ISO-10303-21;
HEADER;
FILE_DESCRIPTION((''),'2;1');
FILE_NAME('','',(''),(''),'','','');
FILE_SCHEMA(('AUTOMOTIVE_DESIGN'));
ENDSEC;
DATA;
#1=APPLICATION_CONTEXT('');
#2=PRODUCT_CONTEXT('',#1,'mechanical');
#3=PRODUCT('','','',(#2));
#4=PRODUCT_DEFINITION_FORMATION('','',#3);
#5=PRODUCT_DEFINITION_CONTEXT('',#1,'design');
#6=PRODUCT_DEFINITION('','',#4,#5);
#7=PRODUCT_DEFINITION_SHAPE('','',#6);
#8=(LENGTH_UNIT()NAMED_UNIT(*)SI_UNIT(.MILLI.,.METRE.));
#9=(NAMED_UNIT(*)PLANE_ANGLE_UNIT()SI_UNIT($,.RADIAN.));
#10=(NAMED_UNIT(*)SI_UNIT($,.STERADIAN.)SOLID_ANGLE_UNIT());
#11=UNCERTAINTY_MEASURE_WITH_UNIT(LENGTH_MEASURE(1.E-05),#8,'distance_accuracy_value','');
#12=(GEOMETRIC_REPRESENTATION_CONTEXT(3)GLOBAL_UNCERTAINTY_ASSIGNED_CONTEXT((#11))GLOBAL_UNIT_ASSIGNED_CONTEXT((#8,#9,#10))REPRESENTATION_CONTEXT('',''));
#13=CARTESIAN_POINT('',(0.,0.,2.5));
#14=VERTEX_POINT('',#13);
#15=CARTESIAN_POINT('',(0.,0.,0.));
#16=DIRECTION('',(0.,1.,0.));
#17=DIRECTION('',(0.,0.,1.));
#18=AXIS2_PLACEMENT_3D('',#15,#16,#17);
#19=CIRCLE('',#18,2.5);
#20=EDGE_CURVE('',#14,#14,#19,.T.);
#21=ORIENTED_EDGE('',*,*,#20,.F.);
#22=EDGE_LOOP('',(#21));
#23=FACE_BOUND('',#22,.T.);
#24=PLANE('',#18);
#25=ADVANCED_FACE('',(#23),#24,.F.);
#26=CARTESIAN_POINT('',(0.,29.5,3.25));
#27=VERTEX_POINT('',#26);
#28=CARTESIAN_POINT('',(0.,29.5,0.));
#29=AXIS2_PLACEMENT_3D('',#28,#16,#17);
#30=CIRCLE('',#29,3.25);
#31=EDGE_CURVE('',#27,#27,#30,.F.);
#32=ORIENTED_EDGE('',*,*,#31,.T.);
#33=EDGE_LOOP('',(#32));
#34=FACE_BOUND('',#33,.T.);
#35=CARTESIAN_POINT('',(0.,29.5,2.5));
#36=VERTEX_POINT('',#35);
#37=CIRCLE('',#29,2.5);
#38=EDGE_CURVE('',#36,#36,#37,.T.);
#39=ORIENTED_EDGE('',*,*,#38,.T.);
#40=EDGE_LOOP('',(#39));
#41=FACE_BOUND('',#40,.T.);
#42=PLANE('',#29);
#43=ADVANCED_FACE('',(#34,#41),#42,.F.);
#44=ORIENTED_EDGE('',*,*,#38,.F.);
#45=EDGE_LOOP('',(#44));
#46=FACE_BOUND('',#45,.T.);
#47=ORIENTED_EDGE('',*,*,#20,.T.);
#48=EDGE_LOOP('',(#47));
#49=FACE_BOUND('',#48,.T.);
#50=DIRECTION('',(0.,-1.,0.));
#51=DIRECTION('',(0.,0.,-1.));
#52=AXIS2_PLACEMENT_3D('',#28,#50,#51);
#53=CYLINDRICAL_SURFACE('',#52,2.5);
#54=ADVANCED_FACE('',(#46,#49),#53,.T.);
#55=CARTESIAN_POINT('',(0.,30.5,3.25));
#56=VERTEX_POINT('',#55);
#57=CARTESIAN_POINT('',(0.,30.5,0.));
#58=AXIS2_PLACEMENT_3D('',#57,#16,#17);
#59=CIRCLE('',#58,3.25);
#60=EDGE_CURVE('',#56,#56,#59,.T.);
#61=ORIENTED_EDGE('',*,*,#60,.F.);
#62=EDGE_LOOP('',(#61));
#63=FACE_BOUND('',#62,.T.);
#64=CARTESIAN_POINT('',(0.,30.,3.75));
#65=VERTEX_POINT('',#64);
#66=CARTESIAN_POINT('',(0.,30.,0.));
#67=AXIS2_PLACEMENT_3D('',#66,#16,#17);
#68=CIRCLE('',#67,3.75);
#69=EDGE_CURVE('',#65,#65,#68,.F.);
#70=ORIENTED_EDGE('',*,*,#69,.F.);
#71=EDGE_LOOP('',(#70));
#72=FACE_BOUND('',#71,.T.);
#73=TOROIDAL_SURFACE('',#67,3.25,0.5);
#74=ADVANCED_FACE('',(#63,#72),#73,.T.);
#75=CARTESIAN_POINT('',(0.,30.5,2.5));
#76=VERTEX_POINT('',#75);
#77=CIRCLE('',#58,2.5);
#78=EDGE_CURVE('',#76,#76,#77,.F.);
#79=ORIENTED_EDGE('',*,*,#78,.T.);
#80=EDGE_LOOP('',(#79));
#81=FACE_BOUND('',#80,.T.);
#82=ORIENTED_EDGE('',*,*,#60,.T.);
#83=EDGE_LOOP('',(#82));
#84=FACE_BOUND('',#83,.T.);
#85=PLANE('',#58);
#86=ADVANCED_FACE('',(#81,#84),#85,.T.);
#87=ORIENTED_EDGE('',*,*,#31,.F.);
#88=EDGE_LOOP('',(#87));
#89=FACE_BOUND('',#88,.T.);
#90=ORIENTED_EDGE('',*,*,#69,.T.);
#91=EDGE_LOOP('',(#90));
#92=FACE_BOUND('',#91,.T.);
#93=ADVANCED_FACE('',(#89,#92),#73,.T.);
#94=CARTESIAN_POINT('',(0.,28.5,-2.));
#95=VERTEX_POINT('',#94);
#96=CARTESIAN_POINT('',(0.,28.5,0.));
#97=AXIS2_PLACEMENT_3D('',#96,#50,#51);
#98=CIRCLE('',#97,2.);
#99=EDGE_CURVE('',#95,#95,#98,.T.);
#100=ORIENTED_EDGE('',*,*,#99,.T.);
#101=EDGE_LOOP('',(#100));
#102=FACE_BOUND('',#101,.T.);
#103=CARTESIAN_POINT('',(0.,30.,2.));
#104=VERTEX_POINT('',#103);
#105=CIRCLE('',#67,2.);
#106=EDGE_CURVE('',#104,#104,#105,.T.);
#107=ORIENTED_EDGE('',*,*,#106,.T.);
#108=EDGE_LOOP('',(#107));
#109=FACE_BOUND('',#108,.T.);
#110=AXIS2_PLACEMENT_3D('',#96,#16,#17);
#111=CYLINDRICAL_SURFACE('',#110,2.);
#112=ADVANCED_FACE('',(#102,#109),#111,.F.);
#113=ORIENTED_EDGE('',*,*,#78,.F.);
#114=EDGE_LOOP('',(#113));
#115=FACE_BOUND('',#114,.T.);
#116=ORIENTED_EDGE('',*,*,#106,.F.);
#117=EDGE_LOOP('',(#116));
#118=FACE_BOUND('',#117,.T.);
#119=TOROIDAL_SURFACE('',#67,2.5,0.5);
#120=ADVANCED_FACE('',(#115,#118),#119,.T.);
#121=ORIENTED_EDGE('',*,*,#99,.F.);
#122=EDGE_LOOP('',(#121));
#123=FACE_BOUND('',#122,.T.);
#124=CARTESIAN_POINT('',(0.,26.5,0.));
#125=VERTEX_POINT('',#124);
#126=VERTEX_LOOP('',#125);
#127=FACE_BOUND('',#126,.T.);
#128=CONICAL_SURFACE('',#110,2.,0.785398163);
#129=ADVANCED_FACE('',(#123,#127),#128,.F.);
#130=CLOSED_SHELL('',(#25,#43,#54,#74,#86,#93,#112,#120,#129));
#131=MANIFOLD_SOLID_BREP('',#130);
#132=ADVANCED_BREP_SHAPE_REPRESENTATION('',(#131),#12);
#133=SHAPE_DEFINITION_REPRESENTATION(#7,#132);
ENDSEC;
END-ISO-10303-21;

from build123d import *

# Parameters (mm, degrees)
SKETCH1_R           = 2.5
BOSS_EXTRUDE1_DEPTH = 29.5
SKETCH2_R           = 3.75
BOSS_EXTRUDE2_DEPTH = 1
SKETCH3_R           = 2
CUT_EXTRUDE2_DEPTH  = 2
FILLET1_R           = 0.5


with BuildPart() as part:
    # Sketch1 → Boss-Extrude1 (new body)
    with BuildSketch(Plane(origin=(0, 0, 0), x_dir=(1, 0, 0), z_dir=(0, 1, 0))):
        with Locations(Location((0, 0, 0), (0, 0, 270))):
            Circle(SKETCH1_R)
    extrude(amount=BOSS_EXTRUDE1_DEPTH)

    # Sketch2 → Boss-Extrude2 (add)
    with BuildSketch(Plane(origin=(0, 29.5, 0), x_dir=(1, 0, 0), z_dir=(0, 1, 0))):
        with Locations(Location((0, 0, 0), (0, 0, 270))):
            Circle(SKETCH2_R)
    extrude(amount=BOSS_EXTRUDE2_DEPTH)

    # Sketch3 → Cut-Extrude2 (cut)
    with BuildSketch(Plane(origin=(0, 30.5, 0), x_dir=(1, 0, 0), z_dir=(0, 1, 0))):
        with Locations(Location((0, 0, 0), (0, 0, 270))):
            Circle(SKETCH3_R)
    extrude(amount=-CUT_EXTRUDE2_DEPTH, mode=Mode.SUBTRACT)

    # Sketch4 → Cut-Revolve1 (revolve, cut)
    with BuildSketch(Plane.XY, mode=Mode.PRIVATE) as cut_revolve1_sk:
        Polygon((-2, 28.5), (0, 26.5), (0, 28.5), align=None)
    revolve(cut_revolve1_sk.sketch.rotate(Axis((0, 26.5, 0), (0, 1, 0)), 90), axis=Axis((0, 26.5, 0), (0, 1, 0)), mode=Mode.SUBTRACT)

    # Fillet1
    fillet1_edges = [part.edges().sort_by_distance(p)[0] for p in [
        (0, 30.5, -2),
        (0, 29.5, -3.75),
        (0, 30.5, -3.75),
    ]]
    fillet(fillet1_edges, radius=FILLET1_R - 0.0001)  # a hair under: the kernel refuses the full size


solid = part.part
